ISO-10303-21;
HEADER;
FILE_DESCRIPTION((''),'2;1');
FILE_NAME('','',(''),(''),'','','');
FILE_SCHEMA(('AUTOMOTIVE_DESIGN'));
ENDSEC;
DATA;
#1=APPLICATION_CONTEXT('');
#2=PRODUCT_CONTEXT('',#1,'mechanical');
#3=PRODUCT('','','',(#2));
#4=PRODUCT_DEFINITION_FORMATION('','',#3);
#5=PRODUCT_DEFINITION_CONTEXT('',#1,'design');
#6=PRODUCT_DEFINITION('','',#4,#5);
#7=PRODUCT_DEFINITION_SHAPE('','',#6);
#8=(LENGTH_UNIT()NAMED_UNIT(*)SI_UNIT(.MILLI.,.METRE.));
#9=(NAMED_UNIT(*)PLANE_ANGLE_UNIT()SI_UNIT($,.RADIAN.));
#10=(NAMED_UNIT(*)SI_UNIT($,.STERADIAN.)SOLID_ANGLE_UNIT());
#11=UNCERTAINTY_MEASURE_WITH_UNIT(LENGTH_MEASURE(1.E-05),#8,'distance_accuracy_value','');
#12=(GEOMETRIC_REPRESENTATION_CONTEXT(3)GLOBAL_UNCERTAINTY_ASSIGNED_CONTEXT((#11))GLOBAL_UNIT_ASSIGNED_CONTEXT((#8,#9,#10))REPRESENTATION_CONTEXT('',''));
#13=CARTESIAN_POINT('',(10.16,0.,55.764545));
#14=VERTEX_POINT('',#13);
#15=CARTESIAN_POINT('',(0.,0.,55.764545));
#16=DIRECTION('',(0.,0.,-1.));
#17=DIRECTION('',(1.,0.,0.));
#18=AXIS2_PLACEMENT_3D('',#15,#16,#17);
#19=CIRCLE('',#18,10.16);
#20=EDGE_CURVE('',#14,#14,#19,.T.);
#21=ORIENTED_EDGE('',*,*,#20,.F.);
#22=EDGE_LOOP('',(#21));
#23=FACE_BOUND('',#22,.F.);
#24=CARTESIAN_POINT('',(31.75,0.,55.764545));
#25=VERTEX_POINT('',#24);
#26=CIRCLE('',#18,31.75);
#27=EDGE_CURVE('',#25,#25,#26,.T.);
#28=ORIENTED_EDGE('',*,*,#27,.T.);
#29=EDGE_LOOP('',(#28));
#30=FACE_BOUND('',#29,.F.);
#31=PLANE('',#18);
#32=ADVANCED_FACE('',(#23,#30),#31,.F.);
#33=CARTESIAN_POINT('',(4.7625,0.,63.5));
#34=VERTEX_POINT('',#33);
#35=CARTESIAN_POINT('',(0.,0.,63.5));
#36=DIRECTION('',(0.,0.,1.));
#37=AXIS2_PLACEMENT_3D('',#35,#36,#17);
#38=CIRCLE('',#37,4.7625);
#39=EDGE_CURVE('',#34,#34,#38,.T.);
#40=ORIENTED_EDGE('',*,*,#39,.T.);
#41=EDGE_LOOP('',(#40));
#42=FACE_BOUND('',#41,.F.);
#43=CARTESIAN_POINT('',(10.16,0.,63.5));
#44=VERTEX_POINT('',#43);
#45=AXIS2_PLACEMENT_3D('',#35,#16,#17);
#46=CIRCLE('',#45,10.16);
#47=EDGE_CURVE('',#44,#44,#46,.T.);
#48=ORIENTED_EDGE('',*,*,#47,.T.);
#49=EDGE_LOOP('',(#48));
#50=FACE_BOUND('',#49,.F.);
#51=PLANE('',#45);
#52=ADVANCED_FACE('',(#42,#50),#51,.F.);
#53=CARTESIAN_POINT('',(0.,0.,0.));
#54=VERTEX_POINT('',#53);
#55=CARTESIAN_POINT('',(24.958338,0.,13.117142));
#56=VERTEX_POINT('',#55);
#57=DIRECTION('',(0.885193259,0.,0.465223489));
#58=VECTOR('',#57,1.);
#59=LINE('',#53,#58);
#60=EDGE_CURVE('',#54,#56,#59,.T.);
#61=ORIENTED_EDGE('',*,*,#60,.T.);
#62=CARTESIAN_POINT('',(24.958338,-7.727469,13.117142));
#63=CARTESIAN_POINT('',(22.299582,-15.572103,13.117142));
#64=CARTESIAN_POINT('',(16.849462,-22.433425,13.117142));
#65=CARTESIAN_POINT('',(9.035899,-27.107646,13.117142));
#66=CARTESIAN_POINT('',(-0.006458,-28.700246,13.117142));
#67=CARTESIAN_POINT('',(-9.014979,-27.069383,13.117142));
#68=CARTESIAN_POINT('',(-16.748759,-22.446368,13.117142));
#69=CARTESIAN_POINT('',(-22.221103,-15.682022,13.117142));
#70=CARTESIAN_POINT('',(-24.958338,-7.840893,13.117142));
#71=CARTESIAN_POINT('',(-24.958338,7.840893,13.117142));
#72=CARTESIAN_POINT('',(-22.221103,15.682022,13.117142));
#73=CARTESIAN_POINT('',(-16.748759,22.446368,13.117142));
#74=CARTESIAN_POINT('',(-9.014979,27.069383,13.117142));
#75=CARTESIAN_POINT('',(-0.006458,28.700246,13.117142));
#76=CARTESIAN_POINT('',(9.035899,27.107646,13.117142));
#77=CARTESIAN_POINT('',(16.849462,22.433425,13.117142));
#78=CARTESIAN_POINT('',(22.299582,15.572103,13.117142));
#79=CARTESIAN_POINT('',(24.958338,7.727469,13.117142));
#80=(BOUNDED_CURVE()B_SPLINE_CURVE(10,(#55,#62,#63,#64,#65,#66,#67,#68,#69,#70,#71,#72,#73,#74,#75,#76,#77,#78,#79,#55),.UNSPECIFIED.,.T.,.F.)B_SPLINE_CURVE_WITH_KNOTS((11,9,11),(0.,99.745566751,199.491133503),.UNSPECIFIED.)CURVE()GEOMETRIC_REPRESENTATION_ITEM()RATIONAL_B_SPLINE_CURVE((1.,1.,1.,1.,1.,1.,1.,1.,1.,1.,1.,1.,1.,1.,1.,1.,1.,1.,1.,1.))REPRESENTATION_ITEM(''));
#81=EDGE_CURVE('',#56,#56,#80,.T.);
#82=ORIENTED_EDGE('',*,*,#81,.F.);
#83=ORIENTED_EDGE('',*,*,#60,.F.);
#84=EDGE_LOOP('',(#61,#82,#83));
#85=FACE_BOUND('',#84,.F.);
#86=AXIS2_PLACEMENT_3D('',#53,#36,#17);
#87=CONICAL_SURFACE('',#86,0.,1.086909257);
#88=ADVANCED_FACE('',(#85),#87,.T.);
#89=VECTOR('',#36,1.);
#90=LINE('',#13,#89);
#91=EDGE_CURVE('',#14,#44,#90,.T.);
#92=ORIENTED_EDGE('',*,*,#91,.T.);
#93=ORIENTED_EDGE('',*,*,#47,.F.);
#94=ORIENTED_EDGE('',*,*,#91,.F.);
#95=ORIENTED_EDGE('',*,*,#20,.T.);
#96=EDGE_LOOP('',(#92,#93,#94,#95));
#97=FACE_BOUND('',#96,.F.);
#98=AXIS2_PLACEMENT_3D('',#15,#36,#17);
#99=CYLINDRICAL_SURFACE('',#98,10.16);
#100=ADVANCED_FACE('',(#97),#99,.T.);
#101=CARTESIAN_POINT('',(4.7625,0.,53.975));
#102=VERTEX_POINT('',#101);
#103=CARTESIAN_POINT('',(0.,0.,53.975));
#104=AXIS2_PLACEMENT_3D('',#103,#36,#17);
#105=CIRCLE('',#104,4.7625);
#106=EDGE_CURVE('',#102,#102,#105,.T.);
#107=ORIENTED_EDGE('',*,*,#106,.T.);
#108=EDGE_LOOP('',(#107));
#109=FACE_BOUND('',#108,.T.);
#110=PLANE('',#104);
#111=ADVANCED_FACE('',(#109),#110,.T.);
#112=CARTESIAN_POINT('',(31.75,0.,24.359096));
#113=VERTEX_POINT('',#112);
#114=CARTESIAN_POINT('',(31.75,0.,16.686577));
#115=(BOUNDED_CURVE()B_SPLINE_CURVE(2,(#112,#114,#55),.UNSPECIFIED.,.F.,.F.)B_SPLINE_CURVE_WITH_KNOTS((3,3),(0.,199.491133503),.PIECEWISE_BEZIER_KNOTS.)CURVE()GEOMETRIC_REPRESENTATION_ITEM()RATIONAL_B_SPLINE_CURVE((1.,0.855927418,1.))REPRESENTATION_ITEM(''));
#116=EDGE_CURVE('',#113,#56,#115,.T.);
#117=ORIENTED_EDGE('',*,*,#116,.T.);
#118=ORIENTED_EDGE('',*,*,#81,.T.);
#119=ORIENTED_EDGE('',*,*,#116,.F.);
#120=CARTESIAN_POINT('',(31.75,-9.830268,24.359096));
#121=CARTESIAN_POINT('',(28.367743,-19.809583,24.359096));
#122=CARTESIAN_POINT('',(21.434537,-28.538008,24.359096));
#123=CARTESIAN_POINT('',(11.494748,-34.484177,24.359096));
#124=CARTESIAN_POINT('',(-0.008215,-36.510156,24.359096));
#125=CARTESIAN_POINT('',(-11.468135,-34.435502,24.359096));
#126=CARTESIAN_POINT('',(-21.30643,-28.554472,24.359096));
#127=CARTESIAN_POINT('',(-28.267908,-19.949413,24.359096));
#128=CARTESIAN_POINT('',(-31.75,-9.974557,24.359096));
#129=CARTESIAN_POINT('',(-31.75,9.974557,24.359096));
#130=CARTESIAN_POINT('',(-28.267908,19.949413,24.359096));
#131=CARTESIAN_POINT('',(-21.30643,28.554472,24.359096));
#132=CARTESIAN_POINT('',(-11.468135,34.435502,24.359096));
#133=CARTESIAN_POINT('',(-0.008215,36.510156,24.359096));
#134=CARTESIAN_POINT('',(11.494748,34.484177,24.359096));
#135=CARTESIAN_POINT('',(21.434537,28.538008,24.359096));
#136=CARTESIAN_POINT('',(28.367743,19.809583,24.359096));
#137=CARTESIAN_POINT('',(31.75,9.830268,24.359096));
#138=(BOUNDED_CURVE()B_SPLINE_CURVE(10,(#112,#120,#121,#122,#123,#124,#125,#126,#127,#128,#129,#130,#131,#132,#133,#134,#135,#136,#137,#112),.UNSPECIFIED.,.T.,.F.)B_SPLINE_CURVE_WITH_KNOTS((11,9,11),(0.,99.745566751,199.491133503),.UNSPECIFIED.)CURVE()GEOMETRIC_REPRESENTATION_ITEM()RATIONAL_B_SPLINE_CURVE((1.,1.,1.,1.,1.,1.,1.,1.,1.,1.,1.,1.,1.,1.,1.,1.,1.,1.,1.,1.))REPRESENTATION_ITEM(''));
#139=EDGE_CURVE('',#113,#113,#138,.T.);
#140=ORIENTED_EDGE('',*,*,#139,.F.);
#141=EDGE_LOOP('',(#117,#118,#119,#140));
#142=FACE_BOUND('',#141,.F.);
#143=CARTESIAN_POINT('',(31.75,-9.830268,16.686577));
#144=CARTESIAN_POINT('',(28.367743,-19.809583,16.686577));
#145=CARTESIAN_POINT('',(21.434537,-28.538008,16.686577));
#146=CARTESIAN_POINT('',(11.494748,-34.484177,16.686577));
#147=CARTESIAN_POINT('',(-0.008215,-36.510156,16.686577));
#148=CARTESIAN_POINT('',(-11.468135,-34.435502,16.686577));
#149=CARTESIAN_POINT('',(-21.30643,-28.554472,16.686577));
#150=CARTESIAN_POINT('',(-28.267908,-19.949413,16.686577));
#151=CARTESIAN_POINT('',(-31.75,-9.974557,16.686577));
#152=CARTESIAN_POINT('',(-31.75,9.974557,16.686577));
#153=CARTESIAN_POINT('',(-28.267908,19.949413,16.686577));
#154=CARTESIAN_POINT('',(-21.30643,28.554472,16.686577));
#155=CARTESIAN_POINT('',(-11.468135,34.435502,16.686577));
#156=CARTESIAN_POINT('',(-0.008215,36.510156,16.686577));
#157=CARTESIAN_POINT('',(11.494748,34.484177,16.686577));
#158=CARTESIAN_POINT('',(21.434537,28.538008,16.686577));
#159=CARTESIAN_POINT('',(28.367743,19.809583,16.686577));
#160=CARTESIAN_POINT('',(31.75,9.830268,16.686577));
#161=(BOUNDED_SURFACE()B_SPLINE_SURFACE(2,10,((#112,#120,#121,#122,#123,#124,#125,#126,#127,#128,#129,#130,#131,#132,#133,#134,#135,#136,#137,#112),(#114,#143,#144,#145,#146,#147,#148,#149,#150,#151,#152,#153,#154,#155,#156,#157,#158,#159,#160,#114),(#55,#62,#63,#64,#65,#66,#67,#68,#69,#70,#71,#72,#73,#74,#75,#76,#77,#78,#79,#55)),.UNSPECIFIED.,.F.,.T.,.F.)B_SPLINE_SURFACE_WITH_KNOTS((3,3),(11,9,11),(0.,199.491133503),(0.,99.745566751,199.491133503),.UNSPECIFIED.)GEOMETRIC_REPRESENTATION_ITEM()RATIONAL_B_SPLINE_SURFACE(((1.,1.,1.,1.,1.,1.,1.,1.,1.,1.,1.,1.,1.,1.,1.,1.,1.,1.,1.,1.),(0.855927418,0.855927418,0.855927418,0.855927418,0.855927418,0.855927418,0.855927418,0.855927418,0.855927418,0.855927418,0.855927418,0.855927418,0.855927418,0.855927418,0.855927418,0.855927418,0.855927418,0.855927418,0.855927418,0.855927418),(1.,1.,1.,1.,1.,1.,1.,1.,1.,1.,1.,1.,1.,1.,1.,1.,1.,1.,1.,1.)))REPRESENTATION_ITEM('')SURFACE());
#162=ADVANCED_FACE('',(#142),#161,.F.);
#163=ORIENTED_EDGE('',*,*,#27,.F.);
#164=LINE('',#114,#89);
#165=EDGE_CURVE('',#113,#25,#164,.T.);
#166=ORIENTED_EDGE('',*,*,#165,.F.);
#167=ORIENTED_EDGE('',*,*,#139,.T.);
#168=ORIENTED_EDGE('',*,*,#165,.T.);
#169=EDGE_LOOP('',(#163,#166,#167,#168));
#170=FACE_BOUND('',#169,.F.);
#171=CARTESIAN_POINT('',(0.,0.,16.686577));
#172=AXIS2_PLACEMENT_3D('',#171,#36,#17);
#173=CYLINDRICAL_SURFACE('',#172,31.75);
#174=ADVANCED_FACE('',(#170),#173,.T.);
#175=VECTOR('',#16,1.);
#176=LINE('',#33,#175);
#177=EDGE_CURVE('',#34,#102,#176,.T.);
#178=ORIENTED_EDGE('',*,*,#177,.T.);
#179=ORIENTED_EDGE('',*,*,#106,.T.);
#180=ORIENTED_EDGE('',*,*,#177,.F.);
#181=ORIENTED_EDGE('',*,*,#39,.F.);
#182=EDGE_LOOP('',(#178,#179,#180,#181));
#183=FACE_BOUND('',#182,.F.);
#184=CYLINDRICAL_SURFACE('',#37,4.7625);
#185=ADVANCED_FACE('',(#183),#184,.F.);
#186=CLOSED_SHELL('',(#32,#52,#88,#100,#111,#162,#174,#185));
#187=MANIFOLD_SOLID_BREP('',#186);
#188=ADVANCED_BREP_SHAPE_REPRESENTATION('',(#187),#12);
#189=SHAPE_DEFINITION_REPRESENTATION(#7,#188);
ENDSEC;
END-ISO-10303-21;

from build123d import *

# Parameters (mm, degrees)
F2_R     = 4.7625
F3_DEPTH = 9.525
F5_R     = 12.7


# Not quite as in the source:
# - the program builds the solid bodies; features that only make, move or delete a surface that nothing else refers to are left out


with BuildPart() as f1:
    # F0 (on Front) → F1 (revolve)
    with BuildSketch(Plane.XZ):
        Polygon((10.16, 55.7645447552), (10.16, 63.5), (0, 63.5), (0, 0), (31.75, 16.6865773499), (31.75, 28.8652195452), (31.75, 46.2049523592), (31.75, 55.7645447552), align=None)
    revolve(axis=Axis((0, 0, 31.75), (0, 0, -1)))

    # F2 (on face) → F3 (cut)
    with BuildSketch(Plane.XY.offset(63.5)):
        Circle(F2_R)
    extrude(amount=-F3_DEPTH, mode=Mode.SUBTRACT)

    # F5
    f5_edges = [f1.edges().sort_by_distance(p)[0] for p in [
        (-31.75, 0, 16.686577),
    ]]
    fillet(f5_edges, radius=F5_R)


solid = f1.part
